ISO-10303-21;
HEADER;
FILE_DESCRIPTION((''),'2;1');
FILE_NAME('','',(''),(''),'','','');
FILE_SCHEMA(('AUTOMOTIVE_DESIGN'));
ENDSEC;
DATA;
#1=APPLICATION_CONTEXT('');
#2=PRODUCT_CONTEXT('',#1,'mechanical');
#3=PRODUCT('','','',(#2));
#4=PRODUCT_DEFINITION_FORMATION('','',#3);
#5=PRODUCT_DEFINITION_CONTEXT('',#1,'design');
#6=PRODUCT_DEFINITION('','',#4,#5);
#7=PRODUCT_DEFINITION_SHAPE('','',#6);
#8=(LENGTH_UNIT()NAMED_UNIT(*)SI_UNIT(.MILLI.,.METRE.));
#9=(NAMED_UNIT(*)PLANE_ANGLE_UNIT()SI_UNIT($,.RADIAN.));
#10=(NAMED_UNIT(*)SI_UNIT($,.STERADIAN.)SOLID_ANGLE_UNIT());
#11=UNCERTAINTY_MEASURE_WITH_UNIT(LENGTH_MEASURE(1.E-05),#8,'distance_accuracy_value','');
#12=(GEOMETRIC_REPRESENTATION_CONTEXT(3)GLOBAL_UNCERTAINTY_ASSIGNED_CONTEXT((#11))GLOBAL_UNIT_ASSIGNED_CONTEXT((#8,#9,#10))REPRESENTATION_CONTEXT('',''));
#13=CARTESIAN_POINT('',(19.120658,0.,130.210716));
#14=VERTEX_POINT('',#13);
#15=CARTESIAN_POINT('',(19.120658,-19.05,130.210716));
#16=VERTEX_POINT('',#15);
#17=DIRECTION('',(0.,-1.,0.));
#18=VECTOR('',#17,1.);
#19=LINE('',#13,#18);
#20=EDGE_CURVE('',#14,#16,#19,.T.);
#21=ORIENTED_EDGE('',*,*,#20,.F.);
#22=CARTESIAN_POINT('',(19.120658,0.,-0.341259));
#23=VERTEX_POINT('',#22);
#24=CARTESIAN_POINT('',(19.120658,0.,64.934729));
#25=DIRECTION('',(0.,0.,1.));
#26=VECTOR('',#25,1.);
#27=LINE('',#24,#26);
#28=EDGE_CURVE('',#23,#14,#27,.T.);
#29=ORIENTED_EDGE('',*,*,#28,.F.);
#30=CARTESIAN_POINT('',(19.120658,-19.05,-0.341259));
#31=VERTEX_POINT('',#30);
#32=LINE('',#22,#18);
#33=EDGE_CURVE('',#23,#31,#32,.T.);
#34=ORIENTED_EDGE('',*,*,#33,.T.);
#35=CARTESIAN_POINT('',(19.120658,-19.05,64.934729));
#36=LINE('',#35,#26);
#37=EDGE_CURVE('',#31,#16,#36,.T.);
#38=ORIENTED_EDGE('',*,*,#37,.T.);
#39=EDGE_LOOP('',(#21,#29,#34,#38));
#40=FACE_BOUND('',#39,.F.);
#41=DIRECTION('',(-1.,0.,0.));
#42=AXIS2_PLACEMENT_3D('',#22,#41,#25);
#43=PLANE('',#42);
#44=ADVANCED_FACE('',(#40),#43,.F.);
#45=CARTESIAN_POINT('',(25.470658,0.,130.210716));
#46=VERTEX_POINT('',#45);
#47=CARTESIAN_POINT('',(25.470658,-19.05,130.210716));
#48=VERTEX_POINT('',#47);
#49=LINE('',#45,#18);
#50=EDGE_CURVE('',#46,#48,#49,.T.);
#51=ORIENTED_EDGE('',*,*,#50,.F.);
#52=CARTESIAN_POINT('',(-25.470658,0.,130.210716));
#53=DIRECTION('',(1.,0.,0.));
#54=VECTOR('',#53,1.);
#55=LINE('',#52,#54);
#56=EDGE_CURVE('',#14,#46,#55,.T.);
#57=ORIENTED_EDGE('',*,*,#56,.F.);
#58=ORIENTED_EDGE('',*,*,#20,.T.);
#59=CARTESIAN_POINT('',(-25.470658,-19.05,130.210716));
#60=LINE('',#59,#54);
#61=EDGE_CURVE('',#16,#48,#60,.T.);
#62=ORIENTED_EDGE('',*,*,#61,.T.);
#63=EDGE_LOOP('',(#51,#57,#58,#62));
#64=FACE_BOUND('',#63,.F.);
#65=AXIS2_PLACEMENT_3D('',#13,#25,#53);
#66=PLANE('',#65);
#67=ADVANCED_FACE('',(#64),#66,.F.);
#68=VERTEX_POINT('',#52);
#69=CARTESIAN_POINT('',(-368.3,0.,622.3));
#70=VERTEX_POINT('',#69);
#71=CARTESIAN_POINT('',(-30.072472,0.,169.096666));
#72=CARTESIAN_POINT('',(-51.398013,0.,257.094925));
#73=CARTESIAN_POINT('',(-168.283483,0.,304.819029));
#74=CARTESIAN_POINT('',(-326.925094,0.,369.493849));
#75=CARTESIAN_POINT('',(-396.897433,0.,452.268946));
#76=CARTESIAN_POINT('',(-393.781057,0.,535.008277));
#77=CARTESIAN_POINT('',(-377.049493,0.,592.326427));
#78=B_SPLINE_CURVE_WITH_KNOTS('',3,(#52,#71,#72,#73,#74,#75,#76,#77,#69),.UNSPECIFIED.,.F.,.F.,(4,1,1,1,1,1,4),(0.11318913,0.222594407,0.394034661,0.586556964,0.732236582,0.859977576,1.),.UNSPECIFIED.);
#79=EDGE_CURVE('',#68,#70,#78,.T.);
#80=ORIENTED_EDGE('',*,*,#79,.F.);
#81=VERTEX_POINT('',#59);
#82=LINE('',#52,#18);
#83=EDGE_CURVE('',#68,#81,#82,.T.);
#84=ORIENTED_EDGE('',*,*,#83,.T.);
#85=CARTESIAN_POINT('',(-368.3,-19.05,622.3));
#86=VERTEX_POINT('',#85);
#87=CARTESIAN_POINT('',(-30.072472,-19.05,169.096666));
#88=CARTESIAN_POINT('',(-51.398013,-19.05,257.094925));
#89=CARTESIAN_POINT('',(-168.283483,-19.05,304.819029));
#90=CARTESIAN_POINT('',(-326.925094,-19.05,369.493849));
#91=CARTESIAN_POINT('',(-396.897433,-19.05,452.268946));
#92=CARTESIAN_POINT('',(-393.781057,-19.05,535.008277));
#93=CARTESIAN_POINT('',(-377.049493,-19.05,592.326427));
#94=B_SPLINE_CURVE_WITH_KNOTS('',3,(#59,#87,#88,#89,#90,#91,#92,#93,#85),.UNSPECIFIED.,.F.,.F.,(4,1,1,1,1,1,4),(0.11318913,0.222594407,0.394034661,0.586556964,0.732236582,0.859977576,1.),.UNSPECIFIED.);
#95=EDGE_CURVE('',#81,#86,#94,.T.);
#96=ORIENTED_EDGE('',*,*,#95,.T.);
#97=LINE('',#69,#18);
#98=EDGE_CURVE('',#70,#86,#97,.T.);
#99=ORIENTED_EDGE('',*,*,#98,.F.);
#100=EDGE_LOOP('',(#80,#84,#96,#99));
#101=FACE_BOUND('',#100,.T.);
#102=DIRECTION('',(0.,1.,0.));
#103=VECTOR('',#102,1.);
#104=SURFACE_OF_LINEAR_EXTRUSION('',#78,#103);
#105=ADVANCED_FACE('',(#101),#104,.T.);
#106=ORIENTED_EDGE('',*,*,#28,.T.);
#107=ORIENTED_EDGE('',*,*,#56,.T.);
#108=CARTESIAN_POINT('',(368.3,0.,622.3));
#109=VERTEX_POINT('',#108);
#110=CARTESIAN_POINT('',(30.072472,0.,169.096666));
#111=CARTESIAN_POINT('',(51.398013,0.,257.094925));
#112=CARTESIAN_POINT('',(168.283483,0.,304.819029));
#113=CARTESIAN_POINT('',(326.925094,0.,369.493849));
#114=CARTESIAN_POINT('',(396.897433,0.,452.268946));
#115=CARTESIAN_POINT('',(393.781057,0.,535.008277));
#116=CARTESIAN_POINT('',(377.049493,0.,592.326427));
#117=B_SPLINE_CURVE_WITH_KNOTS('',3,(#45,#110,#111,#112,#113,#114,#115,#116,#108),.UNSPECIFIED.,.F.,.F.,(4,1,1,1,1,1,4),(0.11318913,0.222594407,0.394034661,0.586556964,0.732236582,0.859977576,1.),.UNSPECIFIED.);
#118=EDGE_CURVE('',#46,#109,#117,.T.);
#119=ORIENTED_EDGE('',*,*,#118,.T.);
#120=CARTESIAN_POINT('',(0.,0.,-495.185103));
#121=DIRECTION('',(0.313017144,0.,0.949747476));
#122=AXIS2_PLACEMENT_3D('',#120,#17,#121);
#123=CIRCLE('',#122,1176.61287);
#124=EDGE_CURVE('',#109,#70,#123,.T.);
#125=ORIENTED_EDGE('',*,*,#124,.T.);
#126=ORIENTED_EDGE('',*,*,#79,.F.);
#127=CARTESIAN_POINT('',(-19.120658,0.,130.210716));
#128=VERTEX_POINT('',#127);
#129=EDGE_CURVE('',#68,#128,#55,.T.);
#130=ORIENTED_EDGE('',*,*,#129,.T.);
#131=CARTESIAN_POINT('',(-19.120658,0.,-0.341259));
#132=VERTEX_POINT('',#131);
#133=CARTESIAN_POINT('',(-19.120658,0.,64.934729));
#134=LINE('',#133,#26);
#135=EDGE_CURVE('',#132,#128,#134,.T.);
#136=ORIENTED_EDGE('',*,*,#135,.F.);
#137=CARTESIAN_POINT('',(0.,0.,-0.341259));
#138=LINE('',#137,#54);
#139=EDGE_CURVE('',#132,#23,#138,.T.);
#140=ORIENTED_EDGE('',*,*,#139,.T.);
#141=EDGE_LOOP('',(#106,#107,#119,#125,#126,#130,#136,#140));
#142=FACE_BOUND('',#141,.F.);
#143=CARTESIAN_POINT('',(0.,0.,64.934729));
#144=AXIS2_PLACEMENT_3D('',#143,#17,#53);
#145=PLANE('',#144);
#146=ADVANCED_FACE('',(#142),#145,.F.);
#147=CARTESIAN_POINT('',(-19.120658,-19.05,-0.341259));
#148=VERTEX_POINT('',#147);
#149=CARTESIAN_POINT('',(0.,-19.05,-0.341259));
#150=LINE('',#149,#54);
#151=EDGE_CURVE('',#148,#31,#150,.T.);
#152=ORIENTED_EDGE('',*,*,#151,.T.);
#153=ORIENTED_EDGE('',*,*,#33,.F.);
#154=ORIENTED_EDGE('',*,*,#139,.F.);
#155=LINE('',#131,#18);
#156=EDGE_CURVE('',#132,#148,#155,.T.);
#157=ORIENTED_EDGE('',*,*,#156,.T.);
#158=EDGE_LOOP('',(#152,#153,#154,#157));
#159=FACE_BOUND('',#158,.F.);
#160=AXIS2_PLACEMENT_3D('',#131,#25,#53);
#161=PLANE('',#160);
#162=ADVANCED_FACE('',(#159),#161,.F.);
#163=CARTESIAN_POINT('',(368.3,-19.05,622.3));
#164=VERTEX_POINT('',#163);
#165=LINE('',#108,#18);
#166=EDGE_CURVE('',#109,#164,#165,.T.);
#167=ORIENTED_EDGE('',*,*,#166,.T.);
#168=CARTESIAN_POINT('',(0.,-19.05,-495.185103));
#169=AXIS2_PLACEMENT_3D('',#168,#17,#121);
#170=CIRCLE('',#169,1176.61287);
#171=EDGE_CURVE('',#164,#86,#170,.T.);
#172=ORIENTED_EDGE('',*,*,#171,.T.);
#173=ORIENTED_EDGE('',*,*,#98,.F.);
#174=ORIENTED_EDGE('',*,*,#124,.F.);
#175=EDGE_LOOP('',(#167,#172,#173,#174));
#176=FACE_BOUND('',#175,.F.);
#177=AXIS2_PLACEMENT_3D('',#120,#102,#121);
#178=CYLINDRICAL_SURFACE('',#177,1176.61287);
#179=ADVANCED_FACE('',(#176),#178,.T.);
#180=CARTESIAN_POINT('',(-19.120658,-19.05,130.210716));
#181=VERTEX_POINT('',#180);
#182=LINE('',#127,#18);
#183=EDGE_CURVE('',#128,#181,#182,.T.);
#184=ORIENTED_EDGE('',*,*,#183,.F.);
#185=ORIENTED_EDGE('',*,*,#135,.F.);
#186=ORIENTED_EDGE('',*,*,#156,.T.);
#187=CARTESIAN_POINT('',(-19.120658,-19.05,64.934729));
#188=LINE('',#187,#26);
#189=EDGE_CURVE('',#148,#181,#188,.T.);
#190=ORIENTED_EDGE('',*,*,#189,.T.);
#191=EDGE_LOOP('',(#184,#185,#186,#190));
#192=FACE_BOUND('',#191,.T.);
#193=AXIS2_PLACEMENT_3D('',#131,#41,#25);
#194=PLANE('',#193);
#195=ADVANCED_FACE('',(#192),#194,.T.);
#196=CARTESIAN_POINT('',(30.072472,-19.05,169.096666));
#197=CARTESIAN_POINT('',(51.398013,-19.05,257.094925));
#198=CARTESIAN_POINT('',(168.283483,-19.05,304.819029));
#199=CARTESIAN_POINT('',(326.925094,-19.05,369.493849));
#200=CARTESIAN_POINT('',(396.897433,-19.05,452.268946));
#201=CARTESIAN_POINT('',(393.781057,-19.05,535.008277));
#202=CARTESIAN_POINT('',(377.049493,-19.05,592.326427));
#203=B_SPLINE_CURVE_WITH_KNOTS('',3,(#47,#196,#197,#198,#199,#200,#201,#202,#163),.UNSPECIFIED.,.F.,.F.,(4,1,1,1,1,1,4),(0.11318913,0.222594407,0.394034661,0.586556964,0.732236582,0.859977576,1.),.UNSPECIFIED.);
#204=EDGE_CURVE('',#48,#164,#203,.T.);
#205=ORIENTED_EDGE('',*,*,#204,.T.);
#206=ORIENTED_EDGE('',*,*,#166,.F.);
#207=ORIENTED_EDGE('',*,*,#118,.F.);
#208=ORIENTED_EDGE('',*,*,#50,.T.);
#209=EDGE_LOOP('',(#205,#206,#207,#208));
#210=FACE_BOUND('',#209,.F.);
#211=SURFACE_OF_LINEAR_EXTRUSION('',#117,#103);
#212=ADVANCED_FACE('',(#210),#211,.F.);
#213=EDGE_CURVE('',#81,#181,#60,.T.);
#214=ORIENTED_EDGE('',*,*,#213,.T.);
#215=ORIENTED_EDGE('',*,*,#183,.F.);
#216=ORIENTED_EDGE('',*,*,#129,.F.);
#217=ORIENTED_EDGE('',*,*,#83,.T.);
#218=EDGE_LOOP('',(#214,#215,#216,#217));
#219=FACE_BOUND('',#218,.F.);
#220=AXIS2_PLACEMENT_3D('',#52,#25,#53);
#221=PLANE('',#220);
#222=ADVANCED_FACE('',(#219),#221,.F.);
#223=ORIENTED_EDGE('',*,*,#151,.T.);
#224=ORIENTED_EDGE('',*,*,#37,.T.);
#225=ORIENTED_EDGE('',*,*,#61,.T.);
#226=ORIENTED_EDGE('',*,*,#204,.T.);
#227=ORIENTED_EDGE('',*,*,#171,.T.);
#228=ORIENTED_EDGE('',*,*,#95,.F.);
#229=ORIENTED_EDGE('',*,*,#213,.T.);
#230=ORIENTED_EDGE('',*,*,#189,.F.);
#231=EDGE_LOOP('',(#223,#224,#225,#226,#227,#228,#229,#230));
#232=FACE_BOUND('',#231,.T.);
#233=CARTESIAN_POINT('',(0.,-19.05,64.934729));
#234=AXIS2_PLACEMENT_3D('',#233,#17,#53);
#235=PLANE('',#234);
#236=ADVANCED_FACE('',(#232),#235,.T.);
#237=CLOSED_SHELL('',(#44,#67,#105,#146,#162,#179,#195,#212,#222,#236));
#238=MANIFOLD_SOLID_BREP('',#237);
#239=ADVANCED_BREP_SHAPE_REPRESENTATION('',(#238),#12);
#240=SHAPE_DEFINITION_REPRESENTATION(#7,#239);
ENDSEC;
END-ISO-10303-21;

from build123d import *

# Parameters (mm, degrees)
F0_W     = 38.2413167982
F0_H     = 130.5519748793
F1_DEPTH = 19.05


with BuildPart() as f1:
    # F0 (on Front) → F1 (new body)
    with BuildSketch(Plane.XZ):
        with Locations((-5e-10, 64.9347287138)):
            Rectangle(F0_W, F0_H)
        with BuildLine():
            Line((-19.1206583996, 130.2107161535), (19.1206583986, 130.2107161535))
            Line((19.1206583986, 130.2107161535), (25.4706583986, 130.2107161535))
            add(Edge.make_bspline(
                [(25.4706583986, 130.2107161535), (30.0724719756, 169.0966659039), (51.3980125218, 257.0949252577), (168.2834825455, 304.8190286771), (326.925094009, 369.4938490194), (396.8974330576, 452.268946401), (393.7810574923, 535.008276766), (377.0494931199, 592.3264271799), (368.2999999833, 622.3000000618)],
                knots=[0.1131891299, 0.1131891299, 0.1131891299, 0.1131891299, 0.2225944071, 0.3940346608, 0.5865569639, 0.732236582, 0.8599775765, 1, 1, 1, 1], degree=3))
            ThreePointArc((368.2999999833, 622.3000000618), (-1.67e-08, 681.4277668685), (-368.3000000167, 622.3000000618))
            add(Edge.make_bspline(
                [(-25.4706584275, 130.2107161535), (-30.0724720137, 169.0966658909), (-51.3980125817, 257.094925206), (-168.2834825322, 304.8190286898), (-326.9250939954, 369.4938490451), (-396.8974330089, 452.2689464188), (-393.781057464, 535.008276759), (-377.0494931536, 592.3264271786), (-368.3000000167, 622.3000000618)],
                knots=[0.1131891299, 0.1131891299, 0.1131891299, 0.1131891299, 0.222594407, 0.3940346608, 0.5865569639, 0.7322365819, 0.8599775765, 1, 1, 1, 1], degree=3))
            Line((-25.4706584275, 130.2107161535), (-19.1206583996, 130.2107161535))
        make_face()
    extrude(amount=F1_DEPTH)


solid = f1.part
